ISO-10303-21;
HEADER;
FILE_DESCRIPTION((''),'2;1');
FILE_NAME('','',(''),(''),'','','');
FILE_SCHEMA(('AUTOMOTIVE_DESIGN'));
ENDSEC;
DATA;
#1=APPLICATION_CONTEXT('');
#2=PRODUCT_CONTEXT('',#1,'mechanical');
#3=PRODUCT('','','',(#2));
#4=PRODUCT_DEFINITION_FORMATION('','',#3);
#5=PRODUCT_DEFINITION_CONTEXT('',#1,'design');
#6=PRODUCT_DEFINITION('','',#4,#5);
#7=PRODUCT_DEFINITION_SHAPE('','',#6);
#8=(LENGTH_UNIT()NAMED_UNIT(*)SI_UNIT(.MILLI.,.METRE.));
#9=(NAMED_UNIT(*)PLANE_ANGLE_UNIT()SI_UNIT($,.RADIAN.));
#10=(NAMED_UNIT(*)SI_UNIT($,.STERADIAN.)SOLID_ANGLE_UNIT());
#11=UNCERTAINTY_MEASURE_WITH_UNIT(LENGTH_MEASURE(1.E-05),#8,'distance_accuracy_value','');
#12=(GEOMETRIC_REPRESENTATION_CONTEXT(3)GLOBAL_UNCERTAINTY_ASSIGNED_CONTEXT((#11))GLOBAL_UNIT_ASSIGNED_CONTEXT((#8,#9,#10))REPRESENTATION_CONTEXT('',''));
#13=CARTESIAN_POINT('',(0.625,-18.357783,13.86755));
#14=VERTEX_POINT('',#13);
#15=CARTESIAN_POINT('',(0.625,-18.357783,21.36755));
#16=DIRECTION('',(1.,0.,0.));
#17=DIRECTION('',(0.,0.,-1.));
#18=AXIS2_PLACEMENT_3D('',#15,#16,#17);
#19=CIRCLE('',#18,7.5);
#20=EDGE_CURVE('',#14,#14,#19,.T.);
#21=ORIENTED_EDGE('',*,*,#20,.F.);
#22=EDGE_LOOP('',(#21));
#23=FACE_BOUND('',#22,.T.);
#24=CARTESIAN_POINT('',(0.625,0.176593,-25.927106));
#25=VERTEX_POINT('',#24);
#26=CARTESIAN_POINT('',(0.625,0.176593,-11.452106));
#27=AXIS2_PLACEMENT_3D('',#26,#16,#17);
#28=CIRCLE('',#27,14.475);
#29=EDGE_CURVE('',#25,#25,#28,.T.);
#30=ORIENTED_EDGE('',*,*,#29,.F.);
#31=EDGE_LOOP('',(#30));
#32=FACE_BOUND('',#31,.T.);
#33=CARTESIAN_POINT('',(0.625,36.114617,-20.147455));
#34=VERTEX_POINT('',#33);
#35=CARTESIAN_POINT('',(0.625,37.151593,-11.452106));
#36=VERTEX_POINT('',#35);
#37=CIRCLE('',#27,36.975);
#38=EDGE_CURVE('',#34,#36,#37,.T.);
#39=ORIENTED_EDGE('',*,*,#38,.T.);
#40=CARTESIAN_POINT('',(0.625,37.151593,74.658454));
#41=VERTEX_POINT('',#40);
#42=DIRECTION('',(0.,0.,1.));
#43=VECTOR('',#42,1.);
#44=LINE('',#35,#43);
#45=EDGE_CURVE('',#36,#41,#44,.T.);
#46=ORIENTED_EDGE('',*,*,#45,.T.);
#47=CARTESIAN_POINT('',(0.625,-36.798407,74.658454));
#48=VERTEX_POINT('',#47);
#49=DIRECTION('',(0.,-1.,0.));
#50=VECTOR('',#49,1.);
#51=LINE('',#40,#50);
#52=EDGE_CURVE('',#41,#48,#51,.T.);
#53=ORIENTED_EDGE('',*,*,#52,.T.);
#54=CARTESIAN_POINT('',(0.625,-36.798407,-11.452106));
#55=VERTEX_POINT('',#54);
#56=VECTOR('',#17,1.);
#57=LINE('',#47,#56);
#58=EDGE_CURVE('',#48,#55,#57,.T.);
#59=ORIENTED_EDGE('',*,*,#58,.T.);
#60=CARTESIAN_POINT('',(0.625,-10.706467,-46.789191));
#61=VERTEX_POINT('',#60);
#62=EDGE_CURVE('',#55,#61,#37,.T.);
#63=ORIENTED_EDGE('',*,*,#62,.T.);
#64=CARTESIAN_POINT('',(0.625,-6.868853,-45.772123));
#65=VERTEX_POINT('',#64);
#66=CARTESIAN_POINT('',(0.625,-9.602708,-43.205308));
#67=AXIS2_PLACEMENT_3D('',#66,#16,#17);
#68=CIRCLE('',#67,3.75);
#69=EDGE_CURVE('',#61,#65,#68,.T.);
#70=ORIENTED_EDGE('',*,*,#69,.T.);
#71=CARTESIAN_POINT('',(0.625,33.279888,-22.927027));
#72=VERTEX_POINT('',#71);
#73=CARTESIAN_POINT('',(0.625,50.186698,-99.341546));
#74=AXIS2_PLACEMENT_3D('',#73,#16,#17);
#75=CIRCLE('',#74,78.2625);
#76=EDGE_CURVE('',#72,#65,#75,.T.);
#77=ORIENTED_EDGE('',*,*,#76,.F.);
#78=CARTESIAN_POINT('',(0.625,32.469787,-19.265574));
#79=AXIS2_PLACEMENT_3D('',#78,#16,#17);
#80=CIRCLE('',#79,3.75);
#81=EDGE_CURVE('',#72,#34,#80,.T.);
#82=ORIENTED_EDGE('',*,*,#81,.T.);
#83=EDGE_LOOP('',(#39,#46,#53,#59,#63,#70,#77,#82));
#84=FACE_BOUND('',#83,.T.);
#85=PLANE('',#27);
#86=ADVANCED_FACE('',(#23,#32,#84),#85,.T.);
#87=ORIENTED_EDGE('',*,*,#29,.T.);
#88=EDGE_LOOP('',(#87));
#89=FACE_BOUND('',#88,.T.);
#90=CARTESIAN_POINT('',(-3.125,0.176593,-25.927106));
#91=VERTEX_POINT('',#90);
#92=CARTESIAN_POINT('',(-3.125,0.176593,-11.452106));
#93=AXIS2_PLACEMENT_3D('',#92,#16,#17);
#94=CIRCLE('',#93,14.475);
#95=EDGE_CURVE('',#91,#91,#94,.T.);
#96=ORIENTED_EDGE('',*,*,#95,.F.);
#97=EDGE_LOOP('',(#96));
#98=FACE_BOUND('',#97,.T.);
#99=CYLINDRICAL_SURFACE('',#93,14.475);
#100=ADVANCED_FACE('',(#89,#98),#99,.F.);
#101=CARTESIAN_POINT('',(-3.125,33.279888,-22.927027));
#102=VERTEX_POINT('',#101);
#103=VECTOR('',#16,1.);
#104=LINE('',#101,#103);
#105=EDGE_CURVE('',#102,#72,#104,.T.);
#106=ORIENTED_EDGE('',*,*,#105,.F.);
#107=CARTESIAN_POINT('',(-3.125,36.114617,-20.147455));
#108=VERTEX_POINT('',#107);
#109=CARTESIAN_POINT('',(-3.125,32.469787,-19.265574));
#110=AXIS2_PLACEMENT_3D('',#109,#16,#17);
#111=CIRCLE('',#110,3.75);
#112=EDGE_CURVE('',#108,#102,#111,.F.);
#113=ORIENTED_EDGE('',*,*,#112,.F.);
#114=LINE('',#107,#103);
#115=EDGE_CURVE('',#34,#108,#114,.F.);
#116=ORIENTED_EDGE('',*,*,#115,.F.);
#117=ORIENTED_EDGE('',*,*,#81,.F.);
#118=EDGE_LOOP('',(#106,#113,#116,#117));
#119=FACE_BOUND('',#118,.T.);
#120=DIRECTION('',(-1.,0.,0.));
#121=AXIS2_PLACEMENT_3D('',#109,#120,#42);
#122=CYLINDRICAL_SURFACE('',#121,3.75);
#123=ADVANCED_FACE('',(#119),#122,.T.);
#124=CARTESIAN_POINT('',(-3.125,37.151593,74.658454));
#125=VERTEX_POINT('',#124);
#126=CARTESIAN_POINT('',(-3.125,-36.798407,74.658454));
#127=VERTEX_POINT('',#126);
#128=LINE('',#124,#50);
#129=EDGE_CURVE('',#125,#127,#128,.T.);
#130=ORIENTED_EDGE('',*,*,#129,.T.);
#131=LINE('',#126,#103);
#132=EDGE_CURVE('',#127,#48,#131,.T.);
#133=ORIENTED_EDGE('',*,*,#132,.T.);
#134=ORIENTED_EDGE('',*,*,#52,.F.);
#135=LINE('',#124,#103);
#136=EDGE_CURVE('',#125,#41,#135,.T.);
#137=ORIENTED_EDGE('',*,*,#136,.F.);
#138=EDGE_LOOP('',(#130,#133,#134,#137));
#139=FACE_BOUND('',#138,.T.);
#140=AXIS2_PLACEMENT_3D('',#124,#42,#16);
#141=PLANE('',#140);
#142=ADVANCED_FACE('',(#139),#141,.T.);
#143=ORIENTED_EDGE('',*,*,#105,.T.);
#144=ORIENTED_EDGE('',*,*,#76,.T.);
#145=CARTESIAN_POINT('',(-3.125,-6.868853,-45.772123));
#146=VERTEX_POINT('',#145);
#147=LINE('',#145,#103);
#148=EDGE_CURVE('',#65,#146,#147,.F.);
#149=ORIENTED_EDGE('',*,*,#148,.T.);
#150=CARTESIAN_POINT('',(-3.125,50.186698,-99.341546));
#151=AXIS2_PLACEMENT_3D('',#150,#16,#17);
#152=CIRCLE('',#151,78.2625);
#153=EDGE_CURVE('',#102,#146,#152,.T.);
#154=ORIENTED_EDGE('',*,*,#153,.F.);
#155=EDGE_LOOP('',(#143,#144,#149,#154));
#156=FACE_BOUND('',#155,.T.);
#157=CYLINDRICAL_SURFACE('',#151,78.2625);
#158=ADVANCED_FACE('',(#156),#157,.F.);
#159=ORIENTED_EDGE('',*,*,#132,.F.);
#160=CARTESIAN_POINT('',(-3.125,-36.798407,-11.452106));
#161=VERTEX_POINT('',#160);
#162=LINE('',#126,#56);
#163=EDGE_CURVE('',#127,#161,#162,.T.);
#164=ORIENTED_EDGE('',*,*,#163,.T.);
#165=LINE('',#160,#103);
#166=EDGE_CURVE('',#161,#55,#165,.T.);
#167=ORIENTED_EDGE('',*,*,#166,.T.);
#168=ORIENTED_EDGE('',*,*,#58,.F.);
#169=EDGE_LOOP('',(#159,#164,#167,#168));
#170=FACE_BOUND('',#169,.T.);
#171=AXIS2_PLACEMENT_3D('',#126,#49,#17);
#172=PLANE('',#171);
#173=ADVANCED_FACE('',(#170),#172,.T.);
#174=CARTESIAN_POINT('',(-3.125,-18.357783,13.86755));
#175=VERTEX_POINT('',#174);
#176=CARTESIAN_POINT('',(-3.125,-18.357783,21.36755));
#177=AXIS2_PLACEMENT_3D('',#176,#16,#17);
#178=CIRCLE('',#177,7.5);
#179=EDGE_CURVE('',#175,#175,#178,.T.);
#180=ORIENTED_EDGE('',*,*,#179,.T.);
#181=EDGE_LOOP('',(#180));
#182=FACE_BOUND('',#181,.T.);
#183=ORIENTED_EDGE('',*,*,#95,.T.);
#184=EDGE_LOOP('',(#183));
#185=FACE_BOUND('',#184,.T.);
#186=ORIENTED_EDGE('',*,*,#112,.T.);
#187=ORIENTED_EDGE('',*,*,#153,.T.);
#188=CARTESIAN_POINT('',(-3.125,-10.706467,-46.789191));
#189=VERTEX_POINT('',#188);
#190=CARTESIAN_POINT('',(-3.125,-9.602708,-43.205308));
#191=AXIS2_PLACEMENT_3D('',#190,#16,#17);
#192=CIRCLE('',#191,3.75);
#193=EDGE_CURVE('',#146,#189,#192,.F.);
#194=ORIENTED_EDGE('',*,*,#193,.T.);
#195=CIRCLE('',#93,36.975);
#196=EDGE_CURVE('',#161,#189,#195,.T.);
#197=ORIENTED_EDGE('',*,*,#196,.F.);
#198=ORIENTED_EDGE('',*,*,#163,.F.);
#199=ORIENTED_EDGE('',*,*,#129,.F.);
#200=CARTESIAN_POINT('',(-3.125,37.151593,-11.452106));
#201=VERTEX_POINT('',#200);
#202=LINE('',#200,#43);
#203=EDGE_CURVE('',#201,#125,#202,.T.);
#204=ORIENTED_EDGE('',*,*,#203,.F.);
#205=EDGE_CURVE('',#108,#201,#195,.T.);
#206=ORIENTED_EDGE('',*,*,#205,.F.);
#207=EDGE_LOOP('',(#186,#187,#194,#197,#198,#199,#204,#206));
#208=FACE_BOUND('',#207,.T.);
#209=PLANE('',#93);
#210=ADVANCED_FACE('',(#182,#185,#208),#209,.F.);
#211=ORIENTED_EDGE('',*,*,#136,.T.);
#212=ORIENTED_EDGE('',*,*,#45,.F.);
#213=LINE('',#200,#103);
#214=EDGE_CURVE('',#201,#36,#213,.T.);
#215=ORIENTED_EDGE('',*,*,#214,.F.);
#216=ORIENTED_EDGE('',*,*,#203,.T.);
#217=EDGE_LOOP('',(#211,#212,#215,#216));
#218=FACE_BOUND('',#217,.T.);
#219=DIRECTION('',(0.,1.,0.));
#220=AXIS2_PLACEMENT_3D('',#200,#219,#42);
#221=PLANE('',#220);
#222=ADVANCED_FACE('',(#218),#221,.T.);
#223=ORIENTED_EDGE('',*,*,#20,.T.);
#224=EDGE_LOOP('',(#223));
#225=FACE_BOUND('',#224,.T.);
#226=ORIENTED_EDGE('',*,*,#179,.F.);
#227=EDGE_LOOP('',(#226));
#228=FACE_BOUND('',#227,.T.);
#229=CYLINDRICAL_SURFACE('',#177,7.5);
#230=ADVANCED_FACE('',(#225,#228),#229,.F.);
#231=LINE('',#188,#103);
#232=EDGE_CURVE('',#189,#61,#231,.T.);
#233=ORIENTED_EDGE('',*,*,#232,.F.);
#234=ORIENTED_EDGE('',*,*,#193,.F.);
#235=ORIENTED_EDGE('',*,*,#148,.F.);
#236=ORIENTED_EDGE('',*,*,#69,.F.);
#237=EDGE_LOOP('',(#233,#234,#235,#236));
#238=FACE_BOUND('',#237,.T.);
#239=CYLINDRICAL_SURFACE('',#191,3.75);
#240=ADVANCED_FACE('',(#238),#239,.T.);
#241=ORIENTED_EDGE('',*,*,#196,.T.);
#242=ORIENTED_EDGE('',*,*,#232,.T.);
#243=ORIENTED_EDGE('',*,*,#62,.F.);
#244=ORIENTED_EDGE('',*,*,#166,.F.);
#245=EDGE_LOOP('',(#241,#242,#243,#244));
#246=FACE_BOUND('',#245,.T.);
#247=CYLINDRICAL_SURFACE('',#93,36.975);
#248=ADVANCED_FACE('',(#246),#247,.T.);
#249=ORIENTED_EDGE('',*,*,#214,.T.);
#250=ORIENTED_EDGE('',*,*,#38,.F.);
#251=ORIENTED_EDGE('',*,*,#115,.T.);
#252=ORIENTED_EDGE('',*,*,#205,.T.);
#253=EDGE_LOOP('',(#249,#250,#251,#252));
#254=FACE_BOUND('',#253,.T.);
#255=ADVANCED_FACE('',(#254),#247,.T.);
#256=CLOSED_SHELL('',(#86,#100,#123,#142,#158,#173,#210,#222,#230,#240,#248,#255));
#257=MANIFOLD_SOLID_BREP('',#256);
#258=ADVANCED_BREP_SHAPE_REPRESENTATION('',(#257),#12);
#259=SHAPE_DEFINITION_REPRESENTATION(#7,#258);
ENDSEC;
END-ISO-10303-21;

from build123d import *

# Parameters (mm, degrees)
SKETCH1_R               = 9.65
BASE_FLANGE1_DEPTH      = 2.5
CUT_EXTRUDE1_DEPTH      = 63.525520722
CUT_EXTRUDE1_DEPTH_BACK = 63.525520722
SKETCH2_R               = 5
SKETCH2_R_2             = 52.175
FILLET1_R               = 2.5
SCALE1_SCALE            = 1.5


# Sheet-metal steps are written as plain solids
with BuildPart() as part:
    # Sketch1 → Base-Flange1 (new body)
    with BuildSketch(Plane(origin=(0, 0, 0), x_dir=(0, 0, -1), z_dir=(1, 0, 0))):
        with BuildLine():
            Line((0, 24.65), (-57.40704, 24.65))
            Line((-57.40704, 24.65), (-57.40704, -24.65))
            Line((-57.40704, -24.65), (0, -24.65))
            ThreePointArc((0, -24.65), (24.65, 0), (0, 24.65))
        make_face()
        Circle(SKETCH1_R, mode=Mode.SUBTRACT)
    extrude(amount=-BASE_FLANGE1_DEPTH)

    # Sketch2 → Cut-Extrude1 (cut, two sides: drawn at the far end of the back side and taken through both)
    with BuildSketch(Plane(origin=(0, 0, 0), x_dir=(0, 0, -1), z_dir=(1, 0, 0)).offset(-CUT_EXTRUDE1_DEPTH_BACK)):
        with Locations((-21.8797706, -12.3562513)):
            Circle(SKETCH2_R)
        with Locations((58.59296, 33.3400694)):
            Circle(SKETCH2_R_2)
    extrude(amount=CUT_EXTRUDE1_DEPTH + CUT_EXTRUDE1_DEPTH_BACK, mode=Mode.SUBTRACT)

    # Fillet1
    fillet1_edges = [part.edges().sort_by_distance(p)[0] for p in [
        (-1.25, 23.529116974, -7.348683856),
        (-1.25, -5.701899087, -23.981468821),
    ]]
    fillet(fillet1_edges, radius=FILLET1_R)


with BuildPart() as part_1:
    # Scale1: scaled about (-1.25, -0.353186923, 22.904210984)
    add(part.part.scale(SCALE1_SCALE).moved(Location((0.625, 0.176593461, -11.452105492))))


solid = part_1.part
